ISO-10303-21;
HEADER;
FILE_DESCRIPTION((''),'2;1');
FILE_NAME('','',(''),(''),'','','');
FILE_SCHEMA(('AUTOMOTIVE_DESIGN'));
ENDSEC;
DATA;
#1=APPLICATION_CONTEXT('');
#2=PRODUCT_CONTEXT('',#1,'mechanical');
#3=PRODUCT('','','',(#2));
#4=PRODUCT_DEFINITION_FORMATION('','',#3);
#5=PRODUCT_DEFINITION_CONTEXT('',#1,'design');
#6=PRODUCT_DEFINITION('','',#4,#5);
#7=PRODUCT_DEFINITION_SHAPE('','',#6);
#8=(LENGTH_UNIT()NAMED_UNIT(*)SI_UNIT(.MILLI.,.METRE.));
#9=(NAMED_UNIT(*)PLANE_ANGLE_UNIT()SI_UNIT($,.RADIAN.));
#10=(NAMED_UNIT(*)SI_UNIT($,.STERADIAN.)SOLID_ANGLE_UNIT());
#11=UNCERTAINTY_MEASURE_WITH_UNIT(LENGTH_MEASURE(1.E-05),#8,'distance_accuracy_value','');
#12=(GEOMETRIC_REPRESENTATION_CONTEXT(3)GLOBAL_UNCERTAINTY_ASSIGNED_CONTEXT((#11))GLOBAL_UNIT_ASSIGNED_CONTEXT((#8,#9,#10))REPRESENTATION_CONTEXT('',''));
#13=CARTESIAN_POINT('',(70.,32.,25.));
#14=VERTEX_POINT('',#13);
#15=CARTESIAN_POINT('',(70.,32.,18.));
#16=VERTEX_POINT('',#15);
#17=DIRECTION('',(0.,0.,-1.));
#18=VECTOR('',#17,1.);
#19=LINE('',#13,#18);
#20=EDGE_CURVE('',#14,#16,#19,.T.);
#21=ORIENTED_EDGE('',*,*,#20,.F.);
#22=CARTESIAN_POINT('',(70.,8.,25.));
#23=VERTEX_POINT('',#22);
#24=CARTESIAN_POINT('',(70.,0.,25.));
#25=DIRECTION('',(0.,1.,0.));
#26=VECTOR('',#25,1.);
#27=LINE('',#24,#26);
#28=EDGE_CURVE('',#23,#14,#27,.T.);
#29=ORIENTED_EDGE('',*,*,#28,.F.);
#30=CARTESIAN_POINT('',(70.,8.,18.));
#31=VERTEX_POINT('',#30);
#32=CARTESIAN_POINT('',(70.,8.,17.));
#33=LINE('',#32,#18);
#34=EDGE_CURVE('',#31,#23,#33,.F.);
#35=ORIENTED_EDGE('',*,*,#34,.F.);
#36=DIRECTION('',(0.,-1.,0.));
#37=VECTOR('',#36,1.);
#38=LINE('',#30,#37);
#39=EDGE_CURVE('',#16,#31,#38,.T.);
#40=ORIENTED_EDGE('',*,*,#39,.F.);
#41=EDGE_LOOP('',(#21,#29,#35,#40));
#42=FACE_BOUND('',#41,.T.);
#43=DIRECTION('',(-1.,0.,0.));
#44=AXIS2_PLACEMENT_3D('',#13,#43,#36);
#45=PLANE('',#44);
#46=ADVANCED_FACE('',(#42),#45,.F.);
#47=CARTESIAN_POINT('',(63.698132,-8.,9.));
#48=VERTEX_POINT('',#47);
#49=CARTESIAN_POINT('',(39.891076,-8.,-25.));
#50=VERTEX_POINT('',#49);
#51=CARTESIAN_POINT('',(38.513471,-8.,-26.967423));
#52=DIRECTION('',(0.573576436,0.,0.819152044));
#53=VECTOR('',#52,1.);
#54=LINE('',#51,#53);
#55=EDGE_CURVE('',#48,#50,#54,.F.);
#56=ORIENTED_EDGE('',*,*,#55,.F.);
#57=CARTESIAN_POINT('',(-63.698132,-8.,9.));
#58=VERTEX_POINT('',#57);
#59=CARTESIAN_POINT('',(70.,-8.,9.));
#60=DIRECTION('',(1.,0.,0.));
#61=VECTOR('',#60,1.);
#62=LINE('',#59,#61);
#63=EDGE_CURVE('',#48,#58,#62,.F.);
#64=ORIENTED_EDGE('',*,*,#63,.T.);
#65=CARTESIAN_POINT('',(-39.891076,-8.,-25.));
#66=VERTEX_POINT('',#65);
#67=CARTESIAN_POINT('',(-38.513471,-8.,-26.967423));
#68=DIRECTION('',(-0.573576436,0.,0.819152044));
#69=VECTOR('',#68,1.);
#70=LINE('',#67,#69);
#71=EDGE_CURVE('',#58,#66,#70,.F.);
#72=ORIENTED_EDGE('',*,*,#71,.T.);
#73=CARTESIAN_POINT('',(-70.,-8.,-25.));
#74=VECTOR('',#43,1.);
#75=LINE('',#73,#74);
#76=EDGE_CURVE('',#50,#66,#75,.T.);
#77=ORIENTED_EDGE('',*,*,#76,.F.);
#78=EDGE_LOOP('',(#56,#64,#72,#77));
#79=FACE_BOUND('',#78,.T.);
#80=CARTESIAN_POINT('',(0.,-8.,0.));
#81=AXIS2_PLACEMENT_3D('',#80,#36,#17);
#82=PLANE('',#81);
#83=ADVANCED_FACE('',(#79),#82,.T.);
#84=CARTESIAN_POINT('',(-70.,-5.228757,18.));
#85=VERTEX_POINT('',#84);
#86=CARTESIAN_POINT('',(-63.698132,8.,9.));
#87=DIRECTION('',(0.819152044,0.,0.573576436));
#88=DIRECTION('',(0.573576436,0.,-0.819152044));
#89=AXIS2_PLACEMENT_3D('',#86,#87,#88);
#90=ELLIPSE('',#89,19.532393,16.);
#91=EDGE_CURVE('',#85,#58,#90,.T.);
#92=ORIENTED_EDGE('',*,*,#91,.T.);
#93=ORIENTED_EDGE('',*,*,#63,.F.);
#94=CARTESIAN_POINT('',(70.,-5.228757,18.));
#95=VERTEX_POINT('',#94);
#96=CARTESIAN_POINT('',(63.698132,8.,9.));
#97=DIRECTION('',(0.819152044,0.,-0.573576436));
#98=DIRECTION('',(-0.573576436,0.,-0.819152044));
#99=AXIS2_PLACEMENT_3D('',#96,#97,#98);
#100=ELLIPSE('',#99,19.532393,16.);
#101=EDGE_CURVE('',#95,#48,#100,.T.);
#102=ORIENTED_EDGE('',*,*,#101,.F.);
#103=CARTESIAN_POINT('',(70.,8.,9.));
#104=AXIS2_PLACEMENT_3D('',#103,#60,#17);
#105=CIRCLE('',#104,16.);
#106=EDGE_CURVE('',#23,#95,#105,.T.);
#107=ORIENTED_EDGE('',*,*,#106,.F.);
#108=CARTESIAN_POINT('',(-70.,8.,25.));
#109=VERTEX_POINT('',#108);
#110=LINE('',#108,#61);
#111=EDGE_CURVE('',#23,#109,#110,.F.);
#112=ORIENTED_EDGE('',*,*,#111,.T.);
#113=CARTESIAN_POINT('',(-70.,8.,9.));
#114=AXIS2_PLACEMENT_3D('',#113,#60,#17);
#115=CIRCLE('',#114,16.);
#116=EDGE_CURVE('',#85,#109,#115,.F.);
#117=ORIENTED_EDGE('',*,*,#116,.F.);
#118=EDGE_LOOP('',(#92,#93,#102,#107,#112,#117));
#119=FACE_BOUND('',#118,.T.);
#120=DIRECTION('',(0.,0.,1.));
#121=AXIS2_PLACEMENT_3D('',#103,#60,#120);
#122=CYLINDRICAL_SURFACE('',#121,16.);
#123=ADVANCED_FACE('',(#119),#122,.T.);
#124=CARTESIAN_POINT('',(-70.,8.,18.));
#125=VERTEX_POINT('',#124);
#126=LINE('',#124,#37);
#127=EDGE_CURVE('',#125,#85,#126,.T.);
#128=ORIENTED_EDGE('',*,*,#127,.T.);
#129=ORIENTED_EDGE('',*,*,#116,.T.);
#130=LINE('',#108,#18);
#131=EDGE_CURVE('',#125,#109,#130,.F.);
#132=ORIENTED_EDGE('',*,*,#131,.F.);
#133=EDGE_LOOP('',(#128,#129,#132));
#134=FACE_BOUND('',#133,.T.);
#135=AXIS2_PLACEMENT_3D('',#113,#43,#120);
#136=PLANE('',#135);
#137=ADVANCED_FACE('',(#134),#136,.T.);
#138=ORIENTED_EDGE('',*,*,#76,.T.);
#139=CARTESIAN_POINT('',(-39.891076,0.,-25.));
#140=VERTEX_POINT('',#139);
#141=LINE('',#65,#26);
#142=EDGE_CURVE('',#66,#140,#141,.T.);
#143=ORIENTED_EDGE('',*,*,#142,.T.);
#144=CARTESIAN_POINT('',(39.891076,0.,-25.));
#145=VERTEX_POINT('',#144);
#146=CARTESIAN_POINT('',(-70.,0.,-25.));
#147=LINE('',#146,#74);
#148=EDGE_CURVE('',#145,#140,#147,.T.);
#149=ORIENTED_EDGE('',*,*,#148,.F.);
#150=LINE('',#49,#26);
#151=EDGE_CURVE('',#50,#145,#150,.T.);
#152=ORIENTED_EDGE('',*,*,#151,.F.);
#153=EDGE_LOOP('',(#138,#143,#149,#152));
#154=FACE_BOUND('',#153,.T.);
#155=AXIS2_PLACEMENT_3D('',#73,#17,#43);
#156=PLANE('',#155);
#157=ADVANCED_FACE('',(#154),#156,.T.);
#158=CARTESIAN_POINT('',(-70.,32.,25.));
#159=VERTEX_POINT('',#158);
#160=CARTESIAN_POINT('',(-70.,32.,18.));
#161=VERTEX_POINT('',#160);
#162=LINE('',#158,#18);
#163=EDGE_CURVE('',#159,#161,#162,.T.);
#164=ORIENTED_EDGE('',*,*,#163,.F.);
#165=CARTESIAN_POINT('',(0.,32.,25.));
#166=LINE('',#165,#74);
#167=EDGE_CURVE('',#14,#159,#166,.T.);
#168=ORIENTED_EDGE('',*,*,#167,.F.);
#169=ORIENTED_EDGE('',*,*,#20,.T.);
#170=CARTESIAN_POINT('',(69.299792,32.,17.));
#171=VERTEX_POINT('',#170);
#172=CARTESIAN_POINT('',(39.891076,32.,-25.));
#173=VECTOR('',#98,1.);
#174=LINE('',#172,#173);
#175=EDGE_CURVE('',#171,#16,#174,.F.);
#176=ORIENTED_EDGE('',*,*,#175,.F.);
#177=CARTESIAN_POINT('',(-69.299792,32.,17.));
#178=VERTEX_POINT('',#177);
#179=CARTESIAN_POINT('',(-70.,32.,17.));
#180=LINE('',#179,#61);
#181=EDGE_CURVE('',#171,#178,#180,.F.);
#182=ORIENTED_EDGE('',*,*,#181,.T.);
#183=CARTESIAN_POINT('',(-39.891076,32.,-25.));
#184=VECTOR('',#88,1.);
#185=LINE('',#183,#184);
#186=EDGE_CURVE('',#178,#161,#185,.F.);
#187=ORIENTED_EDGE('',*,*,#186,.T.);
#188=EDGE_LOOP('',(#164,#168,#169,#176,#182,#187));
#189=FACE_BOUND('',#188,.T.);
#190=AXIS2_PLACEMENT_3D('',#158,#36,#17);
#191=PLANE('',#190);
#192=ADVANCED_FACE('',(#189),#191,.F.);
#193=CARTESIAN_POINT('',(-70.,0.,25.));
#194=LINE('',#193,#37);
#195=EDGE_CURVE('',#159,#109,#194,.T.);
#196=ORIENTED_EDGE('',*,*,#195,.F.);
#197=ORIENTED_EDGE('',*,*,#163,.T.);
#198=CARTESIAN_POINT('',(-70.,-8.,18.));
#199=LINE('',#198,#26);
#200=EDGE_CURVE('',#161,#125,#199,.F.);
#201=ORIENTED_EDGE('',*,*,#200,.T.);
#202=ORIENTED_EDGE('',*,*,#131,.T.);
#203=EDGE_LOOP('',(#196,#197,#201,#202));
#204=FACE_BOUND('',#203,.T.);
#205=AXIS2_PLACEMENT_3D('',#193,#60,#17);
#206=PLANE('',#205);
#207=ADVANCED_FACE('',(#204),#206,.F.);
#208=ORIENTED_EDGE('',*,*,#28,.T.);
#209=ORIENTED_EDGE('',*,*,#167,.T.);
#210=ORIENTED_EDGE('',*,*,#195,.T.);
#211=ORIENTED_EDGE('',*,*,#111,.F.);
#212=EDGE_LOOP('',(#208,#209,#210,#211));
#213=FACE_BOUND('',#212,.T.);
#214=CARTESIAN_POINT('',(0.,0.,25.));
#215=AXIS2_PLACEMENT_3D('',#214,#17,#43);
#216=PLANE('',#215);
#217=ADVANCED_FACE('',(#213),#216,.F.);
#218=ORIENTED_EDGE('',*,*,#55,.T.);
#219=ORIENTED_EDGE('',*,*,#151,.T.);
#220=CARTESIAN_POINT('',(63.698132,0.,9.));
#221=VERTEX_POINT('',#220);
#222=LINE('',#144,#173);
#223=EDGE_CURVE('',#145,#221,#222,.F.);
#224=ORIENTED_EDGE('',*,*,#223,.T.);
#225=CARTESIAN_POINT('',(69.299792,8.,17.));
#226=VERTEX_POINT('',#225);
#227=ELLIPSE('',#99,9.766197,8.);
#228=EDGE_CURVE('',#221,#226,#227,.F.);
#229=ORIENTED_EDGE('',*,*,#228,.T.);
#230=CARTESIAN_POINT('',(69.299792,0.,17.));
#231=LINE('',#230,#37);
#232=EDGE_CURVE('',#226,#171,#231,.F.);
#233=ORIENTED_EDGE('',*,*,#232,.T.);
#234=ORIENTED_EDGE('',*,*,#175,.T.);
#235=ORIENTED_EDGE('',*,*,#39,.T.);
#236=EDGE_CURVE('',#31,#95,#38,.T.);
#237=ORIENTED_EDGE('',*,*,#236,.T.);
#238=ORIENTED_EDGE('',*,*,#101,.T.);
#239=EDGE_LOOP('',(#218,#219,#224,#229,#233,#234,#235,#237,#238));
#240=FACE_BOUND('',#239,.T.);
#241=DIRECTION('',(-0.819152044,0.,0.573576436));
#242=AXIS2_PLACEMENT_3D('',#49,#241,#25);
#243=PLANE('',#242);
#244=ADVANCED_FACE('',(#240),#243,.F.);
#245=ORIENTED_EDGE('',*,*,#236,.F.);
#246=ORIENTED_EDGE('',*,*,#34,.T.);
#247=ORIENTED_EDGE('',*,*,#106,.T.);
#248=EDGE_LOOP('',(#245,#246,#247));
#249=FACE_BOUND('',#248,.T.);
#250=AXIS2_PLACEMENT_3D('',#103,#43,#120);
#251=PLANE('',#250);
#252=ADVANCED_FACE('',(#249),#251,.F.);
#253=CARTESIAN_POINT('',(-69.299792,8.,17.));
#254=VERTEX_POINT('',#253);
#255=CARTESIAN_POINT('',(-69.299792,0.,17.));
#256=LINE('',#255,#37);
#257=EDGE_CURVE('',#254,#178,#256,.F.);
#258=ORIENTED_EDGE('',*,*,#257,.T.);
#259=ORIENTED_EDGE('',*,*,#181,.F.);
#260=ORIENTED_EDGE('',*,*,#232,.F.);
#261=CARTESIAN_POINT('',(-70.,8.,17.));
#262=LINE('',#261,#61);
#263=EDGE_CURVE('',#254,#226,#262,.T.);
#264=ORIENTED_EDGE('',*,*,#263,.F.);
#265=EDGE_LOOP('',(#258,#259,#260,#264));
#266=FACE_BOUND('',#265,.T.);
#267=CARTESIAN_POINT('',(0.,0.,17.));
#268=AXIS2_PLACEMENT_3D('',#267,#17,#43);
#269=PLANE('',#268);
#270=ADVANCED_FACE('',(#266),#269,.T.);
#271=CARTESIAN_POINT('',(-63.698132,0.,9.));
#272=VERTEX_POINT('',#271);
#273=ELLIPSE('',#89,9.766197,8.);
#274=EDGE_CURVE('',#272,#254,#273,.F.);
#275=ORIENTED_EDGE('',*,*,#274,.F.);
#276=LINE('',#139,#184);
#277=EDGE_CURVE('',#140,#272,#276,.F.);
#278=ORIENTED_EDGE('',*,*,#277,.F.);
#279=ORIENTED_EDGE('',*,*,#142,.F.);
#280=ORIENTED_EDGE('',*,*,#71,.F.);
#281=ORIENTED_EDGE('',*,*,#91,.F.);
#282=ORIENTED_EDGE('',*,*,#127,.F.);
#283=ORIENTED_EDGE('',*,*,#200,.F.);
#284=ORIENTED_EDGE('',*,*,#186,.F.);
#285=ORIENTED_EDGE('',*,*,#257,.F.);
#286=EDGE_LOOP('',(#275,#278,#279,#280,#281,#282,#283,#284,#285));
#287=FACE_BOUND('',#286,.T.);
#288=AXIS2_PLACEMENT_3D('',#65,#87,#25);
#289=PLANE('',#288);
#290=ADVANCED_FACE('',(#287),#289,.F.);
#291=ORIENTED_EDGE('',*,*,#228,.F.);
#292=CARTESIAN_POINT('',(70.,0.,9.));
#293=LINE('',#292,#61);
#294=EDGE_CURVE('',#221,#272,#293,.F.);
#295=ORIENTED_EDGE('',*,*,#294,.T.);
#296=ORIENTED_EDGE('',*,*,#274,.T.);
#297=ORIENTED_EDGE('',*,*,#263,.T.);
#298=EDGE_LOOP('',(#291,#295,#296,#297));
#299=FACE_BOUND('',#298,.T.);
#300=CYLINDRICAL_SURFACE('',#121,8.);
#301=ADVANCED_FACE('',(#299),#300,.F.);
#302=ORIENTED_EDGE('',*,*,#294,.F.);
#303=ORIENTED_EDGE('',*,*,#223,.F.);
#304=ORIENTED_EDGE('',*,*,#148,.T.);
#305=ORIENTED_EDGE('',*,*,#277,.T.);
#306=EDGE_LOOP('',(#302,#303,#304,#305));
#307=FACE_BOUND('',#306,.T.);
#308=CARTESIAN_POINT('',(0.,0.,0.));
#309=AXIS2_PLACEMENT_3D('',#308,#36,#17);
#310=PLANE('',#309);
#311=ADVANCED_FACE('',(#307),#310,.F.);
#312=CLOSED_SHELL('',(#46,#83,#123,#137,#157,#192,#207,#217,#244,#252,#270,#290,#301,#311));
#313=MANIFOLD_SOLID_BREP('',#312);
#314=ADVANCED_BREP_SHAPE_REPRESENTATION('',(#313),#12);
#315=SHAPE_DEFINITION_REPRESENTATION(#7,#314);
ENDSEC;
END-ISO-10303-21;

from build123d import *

# Parameters (mm, degrees)
SKETCH1_W                    = 140
SKETCH1_H                    = 50
BASE_FLANGE1_DEPTH           = 8
EDGE_FLANGE1_STRIP_W         = 48
EDGE_FLANGE1_STRIP_H         = 8
EDGE_FLANGE1_STRIP_CUT_DEPTH = 140
EDGE_FLANGE1_DEPTH           = 140
CHAMFER1_SIZE                = 43
CHAMFER1_SIZE2               = 30.108924143
MIRROR2_START                = 47.016267246
MIRROR2_OUTLINE_W            = 55
MIRROR2_OUTLINE_H            = 41
MIRROR2_DEPTH                = 24.663786763


# Read off the part's stored shape, not the designer's step: Mirror2
# Sheet-metal steps are written as plain solids
with BuildPart() as part:
    # Sketch1 → Base-Flange1 (new body)
    with BuildSketch(Plane(origin=(0, 0, 0), x_dir=(1, 0, 0), z_dir=(0, 1, 0))):
        Rectangle(SKETCH1_W, SKETCH1_H)
    extrude(amount=-BASE_FLANGE1_DEPTH)

    # Edge-Flange1 strip (across the edge) → Edge-Flange1 strip cut (cut)
    with BuildSketch(Plane(origin=(-70, 0, 25), x_dir=(0, 0, -1), z_dir=(1, 0, 0))):
        with Locations((-8, -4)):
            Rectangle(EDGE_FLANGE1_STRIP_W, EDGE_FLANGE1_STRIP_H)
    extrude(amount=EDGE_FLANGE1_STRIP_CUT_DEPTH, mode=Mode.SUBTRACT)

    # Edge-Flange1 section (across the edge) → Edge-Flange1 (add)
    with BuildSketch(Plane(origin=(-70, 0, 25), x_dir=(0, 0, -1), z_dir=(1, 0, 0))):
        with BuildLine():
            Line((0, 8), (0, 32))
            Line((0, 32), (8, 32))
            Line((8, 32), (8, 8))
            ThreePointArc((8, 8), (10.343145751, 2.343145751), (16, 0))
            Line((16, 0), (16, -8))
            ThreePointArc((16, -8), (4.686291501, -3.313708499), (0, 8))
        make_face()
    extrude(amount=EDGE_FLANGE1_DEPTH)

    # Chamfer1
    chamfer1_edges = [part.edges().sort_by_distance(p)[0] for p in [
        (-70, -4, -25),
    ]]
    chamfer1_side = [part.faces().sort_by_distance(p)[0] for p in [
        (-70, -0.640312424, -8),
    ]]
    chamfer(chamfer1_edges, length=CHAMFER1_SIZE, length2=CHAMFER1_SIZE2, reference=chamfer1_side[0])

    # Mirror2 outline → Mirror2 (cut)
    with BuildSketch(Plane(origin=(0, 0, 0), x_dir=(0.5735764363510512, 0, 0.8191520442889882), z_dir=(0.8191520442889882, 0, -0.5735764363510512)).offset(MIRROR2_START)):
        with Locations((28.5, -12.5)):
            Rectangle(MIRROR2_OUTLINE_W, MIRROR2_OUTLINE_H)
    extrude(amount=MIRROR2_DEPTH, mode=Mode.SUBTRACT)


solid = part.part
